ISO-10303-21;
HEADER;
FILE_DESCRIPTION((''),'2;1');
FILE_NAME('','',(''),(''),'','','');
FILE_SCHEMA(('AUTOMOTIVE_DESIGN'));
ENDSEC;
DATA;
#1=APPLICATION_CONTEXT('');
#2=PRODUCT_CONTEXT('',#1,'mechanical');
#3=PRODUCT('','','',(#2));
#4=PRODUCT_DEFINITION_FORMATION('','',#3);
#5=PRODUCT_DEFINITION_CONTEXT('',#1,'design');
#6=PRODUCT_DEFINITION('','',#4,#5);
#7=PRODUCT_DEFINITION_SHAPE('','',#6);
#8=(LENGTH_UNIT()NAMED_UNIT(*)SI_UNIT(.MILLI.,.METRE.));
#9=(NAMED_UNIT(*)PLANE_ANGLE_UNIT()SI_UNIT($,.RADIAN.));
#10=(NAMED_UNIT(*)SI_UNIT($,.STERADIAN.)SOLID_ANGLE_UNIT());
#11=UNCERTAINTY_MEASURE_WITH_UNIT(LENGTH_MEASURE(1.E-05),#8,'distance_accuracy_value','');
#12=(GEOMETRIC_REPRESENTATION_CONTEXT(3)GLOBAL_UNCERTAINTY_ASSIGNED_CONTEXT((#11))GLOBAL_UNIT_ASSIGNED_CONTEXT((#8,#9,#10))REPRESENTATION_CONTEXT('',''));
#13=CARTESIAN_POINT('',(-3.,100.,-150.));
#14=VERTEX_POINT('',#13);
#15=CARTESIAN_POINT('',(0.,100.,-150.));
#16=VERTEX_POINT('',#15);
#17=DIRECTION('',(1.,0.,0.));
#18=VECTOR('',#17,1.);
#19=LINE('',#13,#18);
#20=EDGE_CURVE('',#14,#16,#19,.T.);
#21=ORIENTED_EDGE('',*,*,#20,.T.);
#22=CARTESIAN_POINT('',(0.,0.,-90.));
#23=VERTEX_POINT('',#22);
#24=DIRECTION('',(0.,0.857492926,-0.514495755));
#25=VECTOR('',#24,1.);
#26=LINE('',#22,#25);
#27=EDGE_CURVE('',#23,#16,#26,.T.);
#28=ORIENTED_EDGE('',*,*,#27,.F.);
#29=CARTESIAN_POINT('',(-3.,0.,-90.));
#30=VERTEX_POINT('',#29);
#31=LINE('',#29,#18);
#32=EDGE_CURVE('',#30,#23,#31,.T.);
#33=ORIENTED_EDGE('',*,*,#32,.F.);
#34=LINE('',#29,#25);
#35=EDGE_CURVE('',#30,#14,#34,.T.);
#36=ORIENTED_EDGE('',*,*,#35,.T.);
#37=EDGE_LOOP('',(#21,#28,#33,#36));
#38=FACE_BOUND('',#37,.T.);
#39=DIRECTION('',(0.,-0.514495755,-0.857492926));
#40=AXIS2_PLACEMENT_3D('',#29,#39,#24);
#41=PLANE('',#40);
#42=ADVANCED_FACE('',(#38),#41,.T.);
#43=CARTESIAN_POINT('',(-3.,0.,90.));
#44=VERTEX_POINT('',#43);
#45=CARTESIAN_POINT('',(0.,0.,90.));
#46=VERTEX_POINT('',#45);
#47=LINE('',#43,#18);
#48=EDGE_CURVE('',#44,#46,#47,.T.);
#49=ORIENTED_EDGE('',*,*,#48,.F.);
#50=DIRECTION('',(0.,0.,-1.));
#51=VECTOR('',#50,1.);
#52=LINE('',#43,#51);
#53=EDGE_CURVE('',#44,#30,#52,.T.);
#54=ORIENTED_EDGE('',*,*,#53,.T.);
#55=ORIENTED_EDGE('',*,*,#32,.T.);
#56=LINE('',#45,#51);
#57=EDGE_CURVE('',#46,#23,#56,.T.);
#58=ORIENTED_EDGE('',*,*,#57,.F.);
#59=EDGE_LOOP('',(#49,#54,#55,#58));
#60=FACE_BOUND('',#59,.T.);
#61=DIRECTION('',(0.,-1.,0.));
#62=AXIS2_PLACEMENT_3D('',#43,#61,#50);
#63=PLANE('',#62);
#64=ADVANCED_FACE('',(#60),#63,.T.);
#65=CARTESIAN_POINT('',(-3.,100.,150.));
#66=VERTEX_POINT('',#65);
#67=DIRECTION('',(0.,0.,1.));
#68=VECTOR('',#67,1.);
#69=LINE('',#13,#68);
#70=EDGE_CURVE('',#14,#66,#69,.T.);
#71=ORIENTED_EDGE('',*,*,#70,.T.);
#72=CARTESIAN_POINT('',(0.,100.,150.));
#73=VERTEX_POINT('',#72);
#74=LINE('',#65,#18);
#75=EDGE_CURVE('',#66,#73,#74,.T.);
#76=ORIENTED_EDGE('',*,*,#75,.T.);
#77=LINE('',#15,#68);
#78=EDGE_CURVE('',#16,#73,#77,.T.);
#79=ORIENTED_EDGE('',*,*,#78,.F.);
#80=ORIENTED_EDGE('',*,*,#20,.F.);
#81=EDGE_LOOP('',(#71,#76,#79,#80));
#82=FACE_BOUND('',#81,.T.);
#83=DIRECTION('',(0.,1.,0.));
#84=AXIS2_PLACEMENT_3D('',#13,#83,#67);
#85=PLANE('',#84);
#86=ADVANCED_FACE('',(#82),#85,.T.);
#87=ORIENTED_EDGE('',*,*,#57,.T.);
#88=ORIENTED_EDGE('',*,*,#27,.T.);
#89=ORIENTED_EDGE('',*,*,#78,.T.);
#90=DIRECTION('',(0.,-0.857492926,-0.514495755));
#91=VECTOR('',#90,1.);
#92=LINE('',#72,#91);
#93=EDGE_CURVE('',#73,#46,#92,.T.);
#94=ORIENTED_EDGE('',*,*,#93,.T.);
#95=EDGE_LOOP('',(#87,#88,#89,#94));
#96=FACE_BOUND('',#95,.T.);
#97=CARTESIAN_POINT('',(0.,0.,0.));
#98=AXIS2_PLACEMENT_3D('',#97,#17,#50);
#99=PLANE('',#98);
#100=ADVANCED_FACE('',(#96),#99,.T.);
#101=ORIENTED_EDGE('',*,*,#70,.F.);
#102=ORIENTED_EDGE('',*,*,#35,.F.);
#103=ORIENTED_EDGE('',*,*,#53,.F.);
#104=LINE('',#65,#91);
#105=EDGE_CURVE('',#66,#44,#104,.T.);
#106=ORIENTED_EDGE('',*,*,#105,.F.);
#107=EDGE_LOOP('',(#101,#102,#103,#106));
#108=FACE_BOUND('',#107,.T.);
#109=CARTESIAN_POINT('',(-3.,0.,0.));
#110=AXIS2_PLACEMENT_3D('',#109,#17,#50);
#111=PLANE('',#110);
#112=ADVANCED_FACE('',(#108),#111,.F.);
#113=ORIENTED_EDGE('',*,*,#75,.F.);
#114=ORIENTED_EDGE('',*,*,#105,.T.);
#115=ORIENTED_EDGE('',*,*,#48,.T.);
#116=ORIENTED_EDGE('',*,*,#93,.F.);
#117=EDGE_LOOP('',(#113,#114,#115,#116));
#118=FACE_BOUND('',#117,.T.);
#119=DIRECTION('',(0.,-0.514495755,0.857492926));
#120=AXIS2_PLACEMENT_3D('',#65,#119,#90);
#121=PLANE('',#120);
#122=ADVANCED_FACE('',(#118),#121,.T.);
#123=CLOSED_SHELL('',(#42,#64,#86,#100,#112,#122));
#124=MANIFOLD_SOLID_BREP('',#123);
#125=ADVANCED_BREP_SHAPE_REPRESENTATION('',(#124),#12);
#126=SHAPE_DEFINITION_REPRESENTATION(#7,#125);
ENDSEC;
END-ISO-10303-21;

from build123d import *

# Parameters (mm, degrees)
SM_BASE_FLANGE_1_DEPTH = 3


# Sheet-metal steps are written as plain solids
with BuildPart() as part:
    # Sketch 1 → Базовая кромка1 (new body)
    with BuildSketch(Plane(origin=(0, 0, 0), x_dir=(0, 0, -1), z_dir=(1, 0, 0))):
        Polygon((-90, 0), (90, 0), (150, 100), (-150, 100), align=None)
    extrude(amount=-SM_BASE_FLANGE_1_DEPTH)


solid = part.part
